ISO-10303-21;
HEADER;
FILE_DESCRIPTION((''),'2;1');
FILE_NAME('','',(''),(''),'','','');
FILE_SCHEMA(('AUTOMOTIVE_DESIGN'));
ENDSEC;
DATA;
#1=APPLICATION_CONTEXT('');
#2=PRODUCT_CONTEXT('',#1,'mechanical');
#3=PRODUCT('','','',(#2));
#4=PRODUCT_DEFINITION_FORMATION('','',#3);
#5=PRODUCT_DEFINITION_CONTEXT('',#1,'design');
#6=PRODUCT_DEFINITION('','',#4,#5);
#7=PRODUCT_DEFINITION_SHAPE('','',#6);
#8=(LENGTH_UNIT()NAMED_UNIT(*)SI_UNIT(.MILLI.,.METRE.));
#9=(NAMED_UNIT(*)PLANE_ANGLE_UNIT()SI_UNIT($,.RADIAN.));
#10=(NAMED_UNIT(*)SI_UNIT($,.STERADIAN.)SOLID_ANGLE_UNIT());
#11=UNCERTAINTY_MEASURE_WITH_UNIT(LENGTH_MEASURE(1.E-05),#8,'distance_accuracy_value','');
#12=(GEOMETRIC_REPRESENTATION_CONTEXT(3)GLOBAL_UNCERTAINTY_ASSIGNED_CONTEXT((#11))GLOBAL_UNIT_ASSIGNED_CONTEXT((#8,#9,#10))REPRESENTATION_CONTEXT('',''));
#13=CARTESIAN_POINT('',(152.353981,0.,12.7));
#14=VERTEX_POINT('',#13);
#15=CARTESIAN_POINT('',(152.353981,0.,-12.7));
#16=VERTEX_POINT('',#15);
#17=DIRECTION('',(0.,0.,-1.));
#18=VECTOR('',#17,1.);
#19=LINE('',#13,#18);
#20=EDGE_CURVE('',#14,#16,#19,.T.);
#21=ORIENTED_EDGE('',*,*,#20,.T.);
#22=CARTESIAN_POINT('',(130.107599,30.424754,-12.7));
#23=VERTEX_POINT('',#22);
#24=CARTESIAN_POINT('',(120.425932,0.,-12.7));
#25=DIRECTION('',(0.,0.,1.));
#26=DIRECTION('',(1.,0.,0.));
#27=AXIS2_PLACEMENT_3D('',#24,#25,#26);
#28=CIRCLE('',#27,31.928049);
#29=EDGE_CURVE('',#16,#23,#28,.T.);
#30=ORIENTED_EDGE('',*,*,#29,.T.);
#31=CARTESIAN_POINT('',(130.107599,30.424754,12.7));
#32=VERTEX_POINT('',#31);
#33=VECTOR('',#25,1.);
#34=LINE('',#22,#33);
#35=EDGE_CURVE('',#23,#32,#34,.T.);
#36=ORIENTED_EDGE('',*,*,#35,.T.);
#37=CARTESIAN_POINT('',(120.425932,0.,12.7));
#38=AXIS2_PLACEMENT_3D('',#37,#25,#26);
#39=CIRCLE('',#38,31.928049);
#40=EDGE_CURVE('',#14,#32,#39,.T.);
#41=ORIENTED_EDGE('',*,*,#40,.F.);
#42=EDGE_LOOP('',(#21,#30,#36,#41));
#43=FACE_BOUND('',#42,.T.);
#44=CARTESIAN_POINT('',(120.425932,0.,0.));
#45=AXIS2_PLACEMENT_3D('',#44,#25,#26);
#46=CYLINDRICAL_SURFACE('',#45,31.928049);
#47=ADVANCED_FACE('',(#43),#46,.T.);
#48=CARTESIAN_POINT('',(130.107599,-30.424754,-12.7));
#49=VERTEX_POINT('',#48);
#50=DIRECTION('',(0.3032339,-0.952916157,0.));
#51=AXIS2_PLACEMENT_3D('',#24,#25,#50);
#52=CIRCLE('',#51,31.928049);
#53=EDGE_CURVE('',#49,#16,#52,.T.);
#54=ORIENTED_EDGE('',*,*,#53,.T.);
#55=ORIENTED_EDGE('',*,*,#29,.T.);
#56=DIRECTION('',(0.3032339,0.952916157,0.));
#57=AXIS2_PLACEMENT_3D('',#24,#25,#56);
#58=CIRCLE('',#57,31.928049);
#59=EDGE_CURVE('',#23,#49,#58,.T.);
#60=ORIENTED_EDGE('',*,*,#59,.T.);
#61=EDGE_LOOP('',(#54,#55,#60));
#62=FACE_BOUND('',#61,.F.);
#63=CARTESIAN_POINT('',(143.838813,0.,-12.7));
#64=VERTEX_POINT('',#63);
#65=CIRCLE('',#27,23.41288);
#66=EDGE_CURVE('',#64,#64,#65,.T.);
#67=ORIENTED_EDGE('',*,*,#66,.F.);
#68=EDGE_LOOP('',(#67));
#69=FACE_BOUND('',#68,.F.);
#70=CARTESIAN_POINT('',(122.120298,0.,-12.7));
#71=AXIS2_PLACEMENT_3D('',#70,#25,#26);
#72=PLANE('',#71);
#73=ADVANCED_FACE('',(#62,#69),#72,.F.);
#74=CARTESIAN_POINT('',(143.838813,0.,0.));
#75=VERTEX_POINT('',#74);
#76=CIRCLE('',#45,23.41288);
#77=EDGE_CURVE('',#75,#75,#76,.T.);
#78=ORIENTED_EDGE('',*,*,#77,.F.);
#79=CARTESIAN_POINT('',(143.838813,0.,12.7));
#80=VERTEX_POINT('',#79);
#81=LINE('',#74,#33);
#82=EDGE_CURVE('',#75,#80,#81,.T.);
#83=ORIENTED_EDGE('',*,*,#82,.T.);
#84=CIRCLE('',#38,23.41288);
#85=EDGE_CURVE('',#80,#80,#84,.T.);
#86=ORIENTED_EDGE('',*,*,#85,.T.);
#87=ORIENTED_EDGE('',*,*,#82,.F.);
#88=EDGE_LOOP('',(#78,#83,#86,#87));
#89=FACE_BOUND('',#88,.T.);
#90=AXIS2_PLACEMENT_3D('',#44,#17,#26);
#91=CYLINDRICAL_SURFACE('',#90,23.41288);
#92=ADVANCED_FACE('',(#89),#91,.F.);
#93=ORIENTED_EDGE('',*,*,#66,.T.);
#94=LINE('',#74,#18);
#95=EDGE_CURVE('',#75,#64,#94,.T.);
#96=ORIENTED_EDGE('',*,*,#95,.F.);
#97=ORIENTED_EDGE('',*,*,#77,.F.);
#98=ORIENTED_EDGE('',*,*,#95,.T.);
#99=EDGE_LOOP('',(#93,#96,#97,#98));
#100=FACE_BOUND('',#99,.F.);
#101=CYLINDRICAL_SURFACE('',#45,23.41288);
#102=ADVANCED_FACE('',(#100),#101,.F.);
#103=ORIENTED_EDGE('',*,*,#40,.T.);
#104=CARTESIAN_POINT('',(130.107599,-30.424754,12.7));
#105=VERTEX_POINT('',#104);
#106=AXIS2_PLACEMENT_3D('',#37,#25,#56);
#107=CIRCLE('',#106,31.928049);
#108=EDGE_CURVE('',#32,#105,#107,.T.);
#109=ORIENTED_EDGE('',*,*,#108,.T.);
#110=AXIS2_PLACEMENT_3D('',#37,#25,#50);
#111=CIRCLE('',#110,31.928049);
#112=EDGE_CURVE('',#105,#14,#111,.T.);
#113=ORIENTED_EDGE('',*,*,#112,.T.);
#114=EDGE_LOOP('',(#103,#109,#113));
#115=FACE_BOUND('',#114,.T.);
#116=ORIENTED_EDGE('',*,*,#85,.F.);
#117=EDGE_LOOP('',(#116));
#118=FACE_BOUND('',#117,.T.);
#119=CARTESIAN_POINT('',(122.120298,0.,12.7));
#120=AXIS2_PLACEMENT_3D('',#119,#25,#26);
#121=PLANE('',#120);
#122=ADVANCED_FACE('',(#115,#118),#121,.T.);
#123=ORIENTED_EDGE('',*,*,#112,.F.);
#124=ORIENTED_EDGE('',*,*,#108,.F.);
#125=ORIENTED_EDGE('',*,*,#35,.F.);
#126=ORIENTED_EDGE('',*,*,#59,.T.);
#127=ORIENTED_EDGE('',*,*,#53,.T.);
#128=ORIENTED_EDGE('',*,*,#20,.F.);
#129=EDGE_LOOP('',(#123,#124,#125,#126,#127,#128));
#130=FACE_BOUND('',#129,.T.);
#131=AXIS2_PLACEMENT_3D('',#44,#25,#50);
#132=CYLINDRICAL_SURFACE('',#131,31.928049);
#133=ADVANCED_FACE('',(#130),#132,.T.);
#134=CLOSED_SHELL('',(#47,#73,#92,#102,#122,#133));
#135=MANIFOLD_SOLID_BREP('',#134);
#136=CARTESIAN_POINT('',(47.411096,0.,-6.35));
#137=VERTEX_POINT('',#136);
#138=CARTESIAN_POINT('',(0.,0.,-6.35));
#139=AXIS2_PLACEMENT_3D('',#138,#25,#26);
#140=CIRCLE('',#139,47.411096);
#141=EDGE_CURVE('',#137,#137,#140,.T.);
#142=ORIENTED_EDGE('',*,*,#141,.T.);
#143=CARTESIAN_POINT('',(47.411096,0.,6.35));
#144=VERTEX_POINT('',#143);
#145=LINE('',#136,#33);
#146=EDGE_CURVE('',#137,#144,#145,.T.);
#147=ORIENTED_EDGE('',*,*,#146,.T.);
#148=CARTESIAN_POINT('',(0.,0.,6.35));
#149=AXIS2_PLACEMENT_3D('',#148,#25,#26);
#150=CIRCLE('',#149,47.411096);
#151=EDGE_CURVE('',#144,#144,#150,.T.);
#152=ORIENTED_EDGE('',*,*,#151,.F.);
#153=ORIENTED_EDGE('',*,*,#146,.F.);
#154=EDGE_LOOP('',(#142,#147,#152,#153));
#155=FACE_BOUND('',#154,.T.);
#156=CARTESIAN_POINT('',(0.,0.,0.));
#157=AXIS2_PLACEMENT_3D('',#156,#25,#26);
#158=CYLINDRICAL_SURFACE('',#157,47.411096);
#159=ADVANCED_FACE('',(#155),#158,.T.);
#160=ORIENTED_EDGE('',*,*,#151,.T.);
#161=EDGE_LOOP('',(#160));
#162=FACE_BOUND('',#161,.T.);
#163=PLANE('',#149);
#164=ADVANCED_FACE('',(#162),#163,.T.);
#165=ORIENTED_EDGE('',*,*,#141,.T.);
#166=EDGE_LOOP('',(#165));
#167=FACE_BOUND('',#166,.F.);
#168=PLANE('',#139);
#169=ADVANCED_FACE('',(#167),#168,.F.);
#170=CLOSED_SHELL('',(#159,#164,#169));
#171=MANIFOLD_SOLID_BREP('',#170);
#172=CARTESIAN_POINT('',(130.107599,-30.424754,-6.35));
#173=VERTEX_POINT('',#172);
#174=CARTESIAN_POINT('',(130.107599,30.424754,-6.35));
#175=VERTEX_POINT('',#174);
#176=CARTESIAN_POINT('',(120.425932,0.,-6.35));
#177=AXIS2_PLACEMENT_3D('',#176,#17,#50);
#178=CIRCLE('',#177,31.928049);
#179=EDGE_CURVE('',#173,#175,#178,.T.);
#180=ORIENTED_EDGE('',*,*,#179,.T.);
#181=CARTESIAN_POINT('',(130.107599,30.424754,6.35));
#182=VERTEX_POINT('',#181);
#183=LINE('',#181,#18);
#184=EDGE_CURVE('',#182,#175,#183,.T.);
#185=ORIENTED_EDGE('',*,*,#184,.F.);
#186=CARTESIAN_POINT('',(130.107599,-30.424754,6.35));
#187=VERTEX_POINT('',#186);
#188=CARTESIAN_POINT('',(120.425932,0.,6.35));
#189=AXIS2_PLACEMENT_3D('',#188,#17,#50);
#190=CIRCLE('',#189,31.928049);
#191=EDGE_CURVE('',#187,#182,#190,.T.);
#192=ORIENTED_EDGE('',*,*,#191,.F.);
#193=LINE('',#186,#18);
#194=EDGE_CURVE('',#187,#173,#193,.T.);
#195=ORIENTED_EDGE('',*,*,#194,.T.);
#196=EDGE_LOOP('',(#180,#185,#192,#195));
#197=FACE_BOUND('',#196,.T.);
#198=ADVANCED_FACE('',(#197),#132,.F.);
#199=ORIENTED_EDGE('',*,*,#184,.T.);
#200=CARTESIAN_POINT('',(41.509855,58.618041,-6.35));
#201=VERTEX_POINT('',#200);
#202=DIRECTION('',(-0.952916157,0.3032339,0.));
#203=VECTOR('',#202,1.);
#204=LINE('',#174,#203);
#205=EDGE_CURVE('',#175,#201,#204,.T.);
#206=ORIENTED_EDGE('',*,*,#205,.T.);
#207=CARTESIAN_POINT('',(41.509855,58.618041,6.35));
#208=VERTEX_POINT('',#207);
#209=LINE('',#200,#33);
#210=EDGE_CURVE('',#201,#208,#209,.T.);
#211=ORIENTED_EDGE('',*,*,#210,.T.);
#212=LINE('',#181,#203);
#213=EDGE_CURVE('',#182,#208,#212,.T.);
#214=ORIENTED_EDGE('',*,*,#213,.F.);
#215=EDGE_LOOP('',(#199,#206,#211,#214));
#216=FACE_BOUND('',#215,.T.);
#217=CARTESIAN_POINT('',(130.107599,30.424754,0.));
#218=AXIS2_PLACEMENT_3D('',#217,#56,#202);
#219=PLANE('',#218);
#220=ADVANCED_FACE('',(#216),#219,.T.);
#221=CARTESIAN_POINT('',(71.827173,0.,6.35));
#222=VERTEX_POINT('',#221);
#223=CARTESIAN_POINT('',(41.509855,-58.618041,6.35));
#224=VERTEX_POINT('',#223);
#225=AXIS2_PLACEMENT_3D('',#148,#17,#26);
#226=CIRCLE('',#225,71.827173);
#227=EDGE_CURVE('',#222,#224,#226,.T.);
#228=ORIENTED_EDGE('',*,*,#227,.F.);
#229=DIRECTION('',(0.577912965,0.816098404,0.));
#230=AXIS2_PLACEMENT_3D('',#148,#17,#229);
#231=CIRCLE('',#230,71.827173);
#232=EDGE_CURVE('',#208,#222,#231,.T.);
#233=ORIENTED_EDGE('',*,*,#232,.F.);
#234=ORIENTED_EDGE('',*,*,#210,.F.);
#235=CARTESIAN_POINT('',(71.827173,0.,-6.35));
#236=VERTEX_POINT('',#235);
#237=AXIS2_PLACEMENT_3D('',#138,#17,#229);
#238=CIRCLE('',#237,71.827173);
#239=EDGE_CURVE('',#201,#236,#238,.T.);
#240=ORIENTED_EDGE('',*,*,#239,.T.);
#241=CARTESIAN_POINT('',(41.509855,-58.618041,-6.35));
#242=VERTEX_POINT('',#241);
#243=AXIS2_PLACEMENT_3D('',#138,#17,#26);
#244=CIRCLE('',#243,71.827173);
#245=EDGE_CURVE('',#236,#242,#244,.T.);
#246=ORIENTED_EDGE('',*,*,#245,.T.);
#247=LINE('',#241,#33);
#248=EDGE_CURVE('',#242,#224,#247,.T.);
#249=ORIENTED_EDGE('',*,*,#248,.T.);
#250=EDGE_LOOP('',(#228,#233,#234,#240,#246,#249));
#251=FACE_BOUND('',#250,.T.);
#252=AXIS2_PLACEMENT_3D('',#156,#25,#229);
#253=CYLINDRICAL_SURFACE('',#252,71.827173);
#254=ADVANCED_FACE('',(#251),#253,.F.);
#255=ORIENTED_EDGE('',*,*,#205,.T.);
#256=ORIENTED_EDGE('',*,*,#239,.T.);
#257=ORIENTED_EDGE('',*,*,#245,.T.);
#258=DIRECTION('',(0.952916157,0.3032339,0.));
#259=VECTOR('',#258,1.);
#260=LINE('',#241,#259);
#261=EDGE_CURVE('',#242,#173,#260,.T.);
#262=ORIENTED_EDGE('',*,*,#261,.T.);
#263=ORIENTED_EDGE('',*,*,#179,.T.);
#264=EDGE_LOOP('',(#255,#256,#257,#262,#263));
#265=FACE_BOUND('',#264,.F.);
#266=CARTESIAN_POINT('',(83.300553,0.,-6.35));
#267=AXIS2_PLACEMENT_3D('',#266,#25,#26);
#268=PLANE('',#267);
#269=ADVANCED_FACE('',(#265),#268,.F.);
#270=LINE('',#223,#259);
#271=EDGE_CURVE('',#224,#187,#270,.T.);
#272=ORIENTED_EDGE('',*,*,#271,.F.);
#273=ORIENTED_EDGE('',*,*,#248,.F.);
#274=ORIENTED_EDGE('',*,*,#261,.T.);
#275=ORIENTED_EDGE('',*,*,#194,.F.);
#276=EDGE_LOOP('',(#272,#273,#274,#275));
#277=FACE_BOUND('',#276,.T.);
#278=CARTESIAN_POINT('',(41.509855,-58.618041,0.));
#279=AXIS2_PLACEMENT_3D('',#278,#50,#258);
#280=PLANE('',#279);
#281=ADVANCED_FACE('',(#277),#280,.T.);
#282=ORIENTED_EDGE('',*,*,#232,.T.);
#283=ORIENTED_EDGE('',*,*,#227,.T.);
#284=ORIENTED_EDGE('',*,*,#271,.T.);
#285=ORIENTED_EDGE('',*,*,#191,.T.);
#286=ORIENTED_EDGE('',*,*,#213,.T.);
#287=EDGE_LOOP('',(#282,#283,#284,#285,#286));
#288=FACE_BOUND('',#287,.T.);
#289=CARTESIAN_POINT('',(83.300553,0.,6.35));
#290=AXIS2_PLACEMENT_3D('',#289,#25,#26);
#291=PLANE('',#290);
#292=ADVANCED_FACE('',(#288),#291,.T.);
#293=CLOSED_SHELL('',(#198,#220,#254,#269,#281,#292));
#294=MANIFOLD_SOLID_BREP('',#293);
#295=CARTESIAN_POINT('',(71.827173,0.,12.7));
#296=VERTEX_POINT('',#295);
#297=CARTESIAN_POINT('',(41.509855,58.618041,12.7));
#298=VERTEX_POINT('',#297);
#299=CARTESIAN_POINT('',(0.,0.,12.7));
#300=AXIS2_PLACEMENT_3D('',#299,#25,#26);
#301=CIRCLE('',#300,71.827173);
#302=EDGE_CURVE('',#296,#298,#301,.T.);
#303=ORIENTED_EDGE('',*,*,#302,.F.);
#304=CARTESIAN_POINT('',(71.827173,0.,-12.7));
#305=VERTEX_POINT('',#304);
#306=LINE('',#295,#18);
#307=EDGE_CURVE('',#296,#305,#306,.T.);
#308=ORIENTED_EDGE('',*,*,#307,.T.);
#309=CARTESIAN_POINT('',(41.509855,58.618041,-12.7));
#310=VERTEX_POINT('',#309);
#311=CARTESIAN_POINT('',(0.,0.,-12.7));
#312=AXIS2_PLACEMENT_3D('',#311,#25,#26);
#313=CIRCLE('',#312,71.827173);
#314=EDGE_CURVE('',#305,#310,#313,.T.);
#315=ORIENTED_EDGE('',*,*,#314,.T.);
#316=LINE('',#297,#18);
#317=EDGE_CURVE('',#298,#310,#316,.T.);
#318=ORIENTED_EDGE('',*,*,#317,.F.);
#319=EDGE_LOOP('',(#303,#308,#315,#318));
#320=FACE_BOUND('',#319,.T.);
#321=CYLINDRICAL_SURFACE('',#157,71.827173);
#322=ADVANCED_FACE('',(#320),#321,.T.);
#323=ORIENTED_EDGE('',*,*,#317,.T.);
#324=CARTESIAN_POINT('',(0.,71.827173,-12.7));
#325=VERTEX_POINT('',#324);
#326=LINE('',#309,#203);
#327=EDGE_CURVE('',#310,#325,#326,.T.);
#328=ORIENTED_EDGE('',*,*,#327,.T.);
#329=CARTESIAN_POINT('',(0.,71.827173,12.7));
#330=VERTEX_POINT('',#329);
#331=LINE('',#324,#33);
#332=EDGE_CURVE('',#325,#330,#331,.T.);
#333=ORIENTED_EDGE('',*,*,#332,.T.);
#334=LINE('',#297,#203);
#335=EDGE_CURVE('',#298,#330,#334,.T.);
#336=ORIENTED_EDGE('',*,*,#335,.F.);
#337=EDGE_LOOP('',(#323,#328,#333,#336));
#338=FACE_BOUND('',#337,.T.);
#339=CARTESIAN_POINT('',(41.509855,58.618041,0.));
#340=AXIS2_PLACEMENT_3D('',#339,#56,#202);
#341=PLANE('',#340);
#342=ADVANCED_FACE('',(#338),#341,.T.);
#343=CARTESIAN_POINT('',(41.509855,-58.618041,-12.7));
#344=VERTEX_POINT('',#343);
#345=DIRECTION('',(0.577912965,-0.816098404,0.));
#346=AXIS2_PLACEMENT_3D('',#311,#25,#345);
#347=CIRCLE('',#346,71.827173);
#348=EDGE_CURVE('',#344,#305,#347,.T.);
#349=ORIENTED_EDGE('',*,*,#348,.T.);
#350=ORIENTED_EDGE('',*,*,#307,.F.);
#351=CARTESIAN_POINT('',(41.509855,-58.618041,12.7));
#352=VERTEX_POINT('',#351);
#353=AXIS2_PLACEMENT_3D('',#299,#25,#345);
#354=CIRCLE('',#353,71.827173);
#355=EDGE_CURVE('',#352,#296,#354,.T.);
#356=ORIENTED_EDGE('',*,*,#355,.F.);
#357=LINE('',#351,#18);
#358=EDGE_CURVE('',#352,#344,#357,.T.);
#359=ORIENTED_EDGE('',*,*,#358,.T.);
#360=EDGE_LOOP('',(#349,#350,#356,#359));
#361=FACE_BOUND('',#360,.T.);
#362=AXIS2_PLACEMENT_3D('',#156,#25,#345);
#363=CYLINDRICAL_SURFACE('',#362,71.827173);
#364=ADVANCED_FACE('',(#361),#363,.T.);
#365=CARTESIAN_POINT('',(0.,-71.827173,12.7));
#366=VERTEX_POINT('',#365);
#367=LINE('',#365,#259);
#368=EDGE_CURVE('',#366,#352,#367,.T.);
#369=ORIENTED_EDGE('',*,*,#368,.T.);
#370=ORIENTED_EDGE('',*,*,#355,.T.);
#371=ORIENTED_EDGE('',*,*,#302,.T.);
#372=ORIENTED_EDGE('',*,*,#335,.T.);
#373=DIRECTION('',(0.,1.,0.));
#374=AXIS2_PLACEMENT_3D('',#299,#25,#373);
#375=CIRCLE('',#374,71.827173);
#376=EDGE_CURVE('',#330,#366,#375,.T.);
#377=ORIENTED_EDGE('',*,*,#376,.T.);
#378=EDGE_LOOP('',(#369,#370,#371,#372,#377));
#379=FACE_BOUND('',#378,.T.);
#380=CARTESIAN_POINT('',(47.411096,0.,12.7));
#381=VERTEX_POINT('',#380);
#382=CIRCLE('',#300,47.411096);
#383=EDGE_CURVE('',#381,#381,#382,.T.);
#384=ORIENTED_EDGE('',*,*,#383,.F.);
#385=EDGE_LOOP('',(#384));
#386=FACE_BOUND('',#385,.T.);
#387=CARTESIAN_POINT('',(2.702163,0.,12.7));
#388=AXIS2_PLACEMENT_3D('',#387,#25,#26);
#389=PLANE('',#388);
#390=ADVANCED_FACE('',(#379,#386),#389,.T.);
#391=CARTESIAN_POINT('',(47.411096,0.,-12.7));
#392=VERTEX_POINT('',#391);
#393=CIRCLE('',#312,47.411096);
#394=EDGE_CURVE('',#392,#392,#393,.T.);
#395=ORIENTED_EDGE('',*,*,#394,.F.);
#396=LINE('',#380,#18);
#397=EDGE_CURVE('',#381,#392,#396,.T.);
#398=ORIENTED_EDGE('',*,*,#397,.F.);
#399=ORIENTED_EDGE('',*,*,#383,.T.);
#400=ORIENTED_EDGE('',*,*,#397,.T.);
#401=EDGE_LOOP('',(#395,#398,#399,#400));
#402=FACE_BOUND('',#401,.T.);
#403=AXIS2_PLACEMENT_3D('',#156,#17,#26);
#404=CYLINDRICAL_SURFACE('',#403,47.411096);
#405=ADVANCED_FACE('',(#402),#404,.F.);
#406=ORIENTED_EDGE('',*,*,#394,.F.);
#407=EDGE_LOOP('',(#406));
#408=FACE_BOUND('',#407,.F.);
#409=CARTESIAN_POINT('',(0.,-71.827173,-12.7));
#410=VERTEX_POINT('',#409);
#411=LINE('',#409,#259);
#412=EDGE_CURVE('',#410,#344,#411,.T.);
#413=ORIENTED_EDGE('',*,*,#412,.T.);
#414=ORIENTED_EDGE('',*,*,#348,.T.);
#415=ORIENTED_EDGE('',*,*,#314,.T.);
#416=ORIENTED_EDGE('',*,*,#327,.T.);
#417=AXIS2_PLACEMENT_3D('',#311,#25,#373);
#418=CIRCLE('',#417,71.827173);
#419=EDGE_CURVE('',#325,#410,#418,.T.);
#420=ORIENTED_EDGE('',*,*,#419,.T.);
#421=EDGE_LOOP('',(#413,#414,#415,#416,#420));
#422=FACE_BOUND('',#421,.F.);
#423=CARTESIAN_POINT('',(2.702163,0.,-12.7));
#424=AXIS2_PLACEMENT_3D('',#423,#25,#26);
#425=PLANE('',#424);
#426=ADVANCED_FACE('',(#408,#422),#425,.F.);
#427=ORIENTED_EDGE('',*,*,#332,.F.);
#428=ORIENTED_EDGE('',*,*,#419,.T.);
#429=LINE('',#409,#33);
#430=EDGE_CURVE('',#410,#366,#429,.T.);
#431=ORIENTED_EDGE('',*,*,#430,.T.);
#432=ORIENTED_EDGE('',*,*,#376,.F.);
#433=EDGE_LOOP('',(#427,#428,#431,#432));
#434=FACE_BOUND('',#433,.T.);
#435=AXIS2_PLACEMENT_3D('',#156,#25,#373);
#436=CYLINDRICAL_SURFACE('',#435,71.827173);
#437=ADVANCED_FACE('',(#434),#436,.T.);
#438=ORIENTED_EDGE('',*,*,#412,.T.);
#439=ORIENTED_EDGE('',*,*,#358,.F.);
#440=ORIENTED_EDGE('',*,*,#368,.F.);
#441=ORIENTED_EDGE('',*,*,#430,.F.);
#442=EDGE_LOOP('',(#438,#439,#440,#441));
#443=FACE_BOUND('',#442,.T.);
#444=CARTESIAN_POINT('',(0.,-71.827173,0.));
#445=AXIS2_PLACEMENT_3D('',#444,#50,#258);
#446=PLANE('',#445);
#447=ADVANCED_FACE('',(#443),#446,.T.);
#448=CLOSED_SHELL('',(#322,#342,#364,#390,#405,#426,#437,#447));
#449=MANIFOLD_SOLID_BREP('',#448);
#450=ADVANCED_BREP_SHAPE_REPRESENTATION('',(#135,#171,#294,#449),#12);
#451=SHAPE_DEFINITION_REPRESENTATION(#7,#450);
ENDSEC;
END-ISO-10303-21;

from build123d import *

# Parameters (mm, degrees)
F0_R     = 47.411095877
F1_DEPTH = 12.7
F0_R_2   = 23.4128804589
F2_DEPTH = 6.35


with BuildPart() as f1:
    # F0 (on Top) → F1 (new body, symmetric)
    with BuildSketch(Plane.XY):
        with BuildLine():
            Line((41.5098547303, 58.6180414786), (0, 71.8271733157))
            ThreePointArc((0, 71.8271733157), (-71.8271733157, 0), (0, -71.8271733157))
            Line((0, -71.8271733157), (41.5098547303, -58.6180414786))
            ThreePointArc((41.5098547303, -58.6180414786), (63.7992098562, -32.9970248394), (71.8271733157, 0))
            ThreePointArc((71.8271733157, 0), (63.7992098562, 32.9970248394), (41.5098547303, 58.6180414786))
        make_face()
        Circle(F0_R, mode=Mode.SUBTRACT)
    extrude(amount=F1_DEPTH, both=True)


with BuildPart() as f1b:
    # F0 (on Top) → F1, piece 2 (new body, symmetric)
    with BuildSketch(Plane.XY):
        with BuildLine():
            ThreePointArc((152.353980984, 0), (146.1991452891, 18.845205951), (130.1075988936, 30.4247536263))
            ThreePointArc((130.1075988936, 30.4247536263), (88.4978832347, 0), (130.1075988936, -30.4247536263))
            ThreePointArc((130.1075988936, -30.4247536263), (146.1991452891, -18.845205951), (152.353980984, 0))
        make_face()
        with Locations((120.4259321094, 0)):
            Circle(F0_R_2, mode=Mode.SUBTRACT)
    extrude(amount=F1_DEPTH, both=True)


with BuildPart() as f2:
    # F0 (on Top) → F2 (new body, symmetric)
    with BuildSketch(Plane.XY):
        with BuildLine():
            Line((130.1075988936, 30.4247536263), (41.5098547303, 58.6180414786))
            ThreePointArc((41.5098547303, 58.6180414786), (63.7992098562, 32.9970248394), (71.8271733157, 0))
            ThreePointArc((71.8271733157, 0), (63.7992098562, -32.9970248394), (41.5098547303, -58.6180414786))
            Line((41.5098547303, -58.6180414786), (130.1075988936, -30.4247536263))
            ThreePointArc((130.1075988936, -30.4247536263), (88.4978832347, 0), (130.1075988936, 30.4247536263))
        make_face()
    extrude(amount=F2_DEPTH, both=True)


with BuildPart() as f2b:
    # F0 (on Top) → F2, piece 2 (new body, symmetric)
    with BuildSketch(Plane.XY):
        Circle(F0_R)
    extrude(amount=F2_DEPTH, both=True)


solid = Compound([f1.part, f1b.part, f2.part, f2b.part])
